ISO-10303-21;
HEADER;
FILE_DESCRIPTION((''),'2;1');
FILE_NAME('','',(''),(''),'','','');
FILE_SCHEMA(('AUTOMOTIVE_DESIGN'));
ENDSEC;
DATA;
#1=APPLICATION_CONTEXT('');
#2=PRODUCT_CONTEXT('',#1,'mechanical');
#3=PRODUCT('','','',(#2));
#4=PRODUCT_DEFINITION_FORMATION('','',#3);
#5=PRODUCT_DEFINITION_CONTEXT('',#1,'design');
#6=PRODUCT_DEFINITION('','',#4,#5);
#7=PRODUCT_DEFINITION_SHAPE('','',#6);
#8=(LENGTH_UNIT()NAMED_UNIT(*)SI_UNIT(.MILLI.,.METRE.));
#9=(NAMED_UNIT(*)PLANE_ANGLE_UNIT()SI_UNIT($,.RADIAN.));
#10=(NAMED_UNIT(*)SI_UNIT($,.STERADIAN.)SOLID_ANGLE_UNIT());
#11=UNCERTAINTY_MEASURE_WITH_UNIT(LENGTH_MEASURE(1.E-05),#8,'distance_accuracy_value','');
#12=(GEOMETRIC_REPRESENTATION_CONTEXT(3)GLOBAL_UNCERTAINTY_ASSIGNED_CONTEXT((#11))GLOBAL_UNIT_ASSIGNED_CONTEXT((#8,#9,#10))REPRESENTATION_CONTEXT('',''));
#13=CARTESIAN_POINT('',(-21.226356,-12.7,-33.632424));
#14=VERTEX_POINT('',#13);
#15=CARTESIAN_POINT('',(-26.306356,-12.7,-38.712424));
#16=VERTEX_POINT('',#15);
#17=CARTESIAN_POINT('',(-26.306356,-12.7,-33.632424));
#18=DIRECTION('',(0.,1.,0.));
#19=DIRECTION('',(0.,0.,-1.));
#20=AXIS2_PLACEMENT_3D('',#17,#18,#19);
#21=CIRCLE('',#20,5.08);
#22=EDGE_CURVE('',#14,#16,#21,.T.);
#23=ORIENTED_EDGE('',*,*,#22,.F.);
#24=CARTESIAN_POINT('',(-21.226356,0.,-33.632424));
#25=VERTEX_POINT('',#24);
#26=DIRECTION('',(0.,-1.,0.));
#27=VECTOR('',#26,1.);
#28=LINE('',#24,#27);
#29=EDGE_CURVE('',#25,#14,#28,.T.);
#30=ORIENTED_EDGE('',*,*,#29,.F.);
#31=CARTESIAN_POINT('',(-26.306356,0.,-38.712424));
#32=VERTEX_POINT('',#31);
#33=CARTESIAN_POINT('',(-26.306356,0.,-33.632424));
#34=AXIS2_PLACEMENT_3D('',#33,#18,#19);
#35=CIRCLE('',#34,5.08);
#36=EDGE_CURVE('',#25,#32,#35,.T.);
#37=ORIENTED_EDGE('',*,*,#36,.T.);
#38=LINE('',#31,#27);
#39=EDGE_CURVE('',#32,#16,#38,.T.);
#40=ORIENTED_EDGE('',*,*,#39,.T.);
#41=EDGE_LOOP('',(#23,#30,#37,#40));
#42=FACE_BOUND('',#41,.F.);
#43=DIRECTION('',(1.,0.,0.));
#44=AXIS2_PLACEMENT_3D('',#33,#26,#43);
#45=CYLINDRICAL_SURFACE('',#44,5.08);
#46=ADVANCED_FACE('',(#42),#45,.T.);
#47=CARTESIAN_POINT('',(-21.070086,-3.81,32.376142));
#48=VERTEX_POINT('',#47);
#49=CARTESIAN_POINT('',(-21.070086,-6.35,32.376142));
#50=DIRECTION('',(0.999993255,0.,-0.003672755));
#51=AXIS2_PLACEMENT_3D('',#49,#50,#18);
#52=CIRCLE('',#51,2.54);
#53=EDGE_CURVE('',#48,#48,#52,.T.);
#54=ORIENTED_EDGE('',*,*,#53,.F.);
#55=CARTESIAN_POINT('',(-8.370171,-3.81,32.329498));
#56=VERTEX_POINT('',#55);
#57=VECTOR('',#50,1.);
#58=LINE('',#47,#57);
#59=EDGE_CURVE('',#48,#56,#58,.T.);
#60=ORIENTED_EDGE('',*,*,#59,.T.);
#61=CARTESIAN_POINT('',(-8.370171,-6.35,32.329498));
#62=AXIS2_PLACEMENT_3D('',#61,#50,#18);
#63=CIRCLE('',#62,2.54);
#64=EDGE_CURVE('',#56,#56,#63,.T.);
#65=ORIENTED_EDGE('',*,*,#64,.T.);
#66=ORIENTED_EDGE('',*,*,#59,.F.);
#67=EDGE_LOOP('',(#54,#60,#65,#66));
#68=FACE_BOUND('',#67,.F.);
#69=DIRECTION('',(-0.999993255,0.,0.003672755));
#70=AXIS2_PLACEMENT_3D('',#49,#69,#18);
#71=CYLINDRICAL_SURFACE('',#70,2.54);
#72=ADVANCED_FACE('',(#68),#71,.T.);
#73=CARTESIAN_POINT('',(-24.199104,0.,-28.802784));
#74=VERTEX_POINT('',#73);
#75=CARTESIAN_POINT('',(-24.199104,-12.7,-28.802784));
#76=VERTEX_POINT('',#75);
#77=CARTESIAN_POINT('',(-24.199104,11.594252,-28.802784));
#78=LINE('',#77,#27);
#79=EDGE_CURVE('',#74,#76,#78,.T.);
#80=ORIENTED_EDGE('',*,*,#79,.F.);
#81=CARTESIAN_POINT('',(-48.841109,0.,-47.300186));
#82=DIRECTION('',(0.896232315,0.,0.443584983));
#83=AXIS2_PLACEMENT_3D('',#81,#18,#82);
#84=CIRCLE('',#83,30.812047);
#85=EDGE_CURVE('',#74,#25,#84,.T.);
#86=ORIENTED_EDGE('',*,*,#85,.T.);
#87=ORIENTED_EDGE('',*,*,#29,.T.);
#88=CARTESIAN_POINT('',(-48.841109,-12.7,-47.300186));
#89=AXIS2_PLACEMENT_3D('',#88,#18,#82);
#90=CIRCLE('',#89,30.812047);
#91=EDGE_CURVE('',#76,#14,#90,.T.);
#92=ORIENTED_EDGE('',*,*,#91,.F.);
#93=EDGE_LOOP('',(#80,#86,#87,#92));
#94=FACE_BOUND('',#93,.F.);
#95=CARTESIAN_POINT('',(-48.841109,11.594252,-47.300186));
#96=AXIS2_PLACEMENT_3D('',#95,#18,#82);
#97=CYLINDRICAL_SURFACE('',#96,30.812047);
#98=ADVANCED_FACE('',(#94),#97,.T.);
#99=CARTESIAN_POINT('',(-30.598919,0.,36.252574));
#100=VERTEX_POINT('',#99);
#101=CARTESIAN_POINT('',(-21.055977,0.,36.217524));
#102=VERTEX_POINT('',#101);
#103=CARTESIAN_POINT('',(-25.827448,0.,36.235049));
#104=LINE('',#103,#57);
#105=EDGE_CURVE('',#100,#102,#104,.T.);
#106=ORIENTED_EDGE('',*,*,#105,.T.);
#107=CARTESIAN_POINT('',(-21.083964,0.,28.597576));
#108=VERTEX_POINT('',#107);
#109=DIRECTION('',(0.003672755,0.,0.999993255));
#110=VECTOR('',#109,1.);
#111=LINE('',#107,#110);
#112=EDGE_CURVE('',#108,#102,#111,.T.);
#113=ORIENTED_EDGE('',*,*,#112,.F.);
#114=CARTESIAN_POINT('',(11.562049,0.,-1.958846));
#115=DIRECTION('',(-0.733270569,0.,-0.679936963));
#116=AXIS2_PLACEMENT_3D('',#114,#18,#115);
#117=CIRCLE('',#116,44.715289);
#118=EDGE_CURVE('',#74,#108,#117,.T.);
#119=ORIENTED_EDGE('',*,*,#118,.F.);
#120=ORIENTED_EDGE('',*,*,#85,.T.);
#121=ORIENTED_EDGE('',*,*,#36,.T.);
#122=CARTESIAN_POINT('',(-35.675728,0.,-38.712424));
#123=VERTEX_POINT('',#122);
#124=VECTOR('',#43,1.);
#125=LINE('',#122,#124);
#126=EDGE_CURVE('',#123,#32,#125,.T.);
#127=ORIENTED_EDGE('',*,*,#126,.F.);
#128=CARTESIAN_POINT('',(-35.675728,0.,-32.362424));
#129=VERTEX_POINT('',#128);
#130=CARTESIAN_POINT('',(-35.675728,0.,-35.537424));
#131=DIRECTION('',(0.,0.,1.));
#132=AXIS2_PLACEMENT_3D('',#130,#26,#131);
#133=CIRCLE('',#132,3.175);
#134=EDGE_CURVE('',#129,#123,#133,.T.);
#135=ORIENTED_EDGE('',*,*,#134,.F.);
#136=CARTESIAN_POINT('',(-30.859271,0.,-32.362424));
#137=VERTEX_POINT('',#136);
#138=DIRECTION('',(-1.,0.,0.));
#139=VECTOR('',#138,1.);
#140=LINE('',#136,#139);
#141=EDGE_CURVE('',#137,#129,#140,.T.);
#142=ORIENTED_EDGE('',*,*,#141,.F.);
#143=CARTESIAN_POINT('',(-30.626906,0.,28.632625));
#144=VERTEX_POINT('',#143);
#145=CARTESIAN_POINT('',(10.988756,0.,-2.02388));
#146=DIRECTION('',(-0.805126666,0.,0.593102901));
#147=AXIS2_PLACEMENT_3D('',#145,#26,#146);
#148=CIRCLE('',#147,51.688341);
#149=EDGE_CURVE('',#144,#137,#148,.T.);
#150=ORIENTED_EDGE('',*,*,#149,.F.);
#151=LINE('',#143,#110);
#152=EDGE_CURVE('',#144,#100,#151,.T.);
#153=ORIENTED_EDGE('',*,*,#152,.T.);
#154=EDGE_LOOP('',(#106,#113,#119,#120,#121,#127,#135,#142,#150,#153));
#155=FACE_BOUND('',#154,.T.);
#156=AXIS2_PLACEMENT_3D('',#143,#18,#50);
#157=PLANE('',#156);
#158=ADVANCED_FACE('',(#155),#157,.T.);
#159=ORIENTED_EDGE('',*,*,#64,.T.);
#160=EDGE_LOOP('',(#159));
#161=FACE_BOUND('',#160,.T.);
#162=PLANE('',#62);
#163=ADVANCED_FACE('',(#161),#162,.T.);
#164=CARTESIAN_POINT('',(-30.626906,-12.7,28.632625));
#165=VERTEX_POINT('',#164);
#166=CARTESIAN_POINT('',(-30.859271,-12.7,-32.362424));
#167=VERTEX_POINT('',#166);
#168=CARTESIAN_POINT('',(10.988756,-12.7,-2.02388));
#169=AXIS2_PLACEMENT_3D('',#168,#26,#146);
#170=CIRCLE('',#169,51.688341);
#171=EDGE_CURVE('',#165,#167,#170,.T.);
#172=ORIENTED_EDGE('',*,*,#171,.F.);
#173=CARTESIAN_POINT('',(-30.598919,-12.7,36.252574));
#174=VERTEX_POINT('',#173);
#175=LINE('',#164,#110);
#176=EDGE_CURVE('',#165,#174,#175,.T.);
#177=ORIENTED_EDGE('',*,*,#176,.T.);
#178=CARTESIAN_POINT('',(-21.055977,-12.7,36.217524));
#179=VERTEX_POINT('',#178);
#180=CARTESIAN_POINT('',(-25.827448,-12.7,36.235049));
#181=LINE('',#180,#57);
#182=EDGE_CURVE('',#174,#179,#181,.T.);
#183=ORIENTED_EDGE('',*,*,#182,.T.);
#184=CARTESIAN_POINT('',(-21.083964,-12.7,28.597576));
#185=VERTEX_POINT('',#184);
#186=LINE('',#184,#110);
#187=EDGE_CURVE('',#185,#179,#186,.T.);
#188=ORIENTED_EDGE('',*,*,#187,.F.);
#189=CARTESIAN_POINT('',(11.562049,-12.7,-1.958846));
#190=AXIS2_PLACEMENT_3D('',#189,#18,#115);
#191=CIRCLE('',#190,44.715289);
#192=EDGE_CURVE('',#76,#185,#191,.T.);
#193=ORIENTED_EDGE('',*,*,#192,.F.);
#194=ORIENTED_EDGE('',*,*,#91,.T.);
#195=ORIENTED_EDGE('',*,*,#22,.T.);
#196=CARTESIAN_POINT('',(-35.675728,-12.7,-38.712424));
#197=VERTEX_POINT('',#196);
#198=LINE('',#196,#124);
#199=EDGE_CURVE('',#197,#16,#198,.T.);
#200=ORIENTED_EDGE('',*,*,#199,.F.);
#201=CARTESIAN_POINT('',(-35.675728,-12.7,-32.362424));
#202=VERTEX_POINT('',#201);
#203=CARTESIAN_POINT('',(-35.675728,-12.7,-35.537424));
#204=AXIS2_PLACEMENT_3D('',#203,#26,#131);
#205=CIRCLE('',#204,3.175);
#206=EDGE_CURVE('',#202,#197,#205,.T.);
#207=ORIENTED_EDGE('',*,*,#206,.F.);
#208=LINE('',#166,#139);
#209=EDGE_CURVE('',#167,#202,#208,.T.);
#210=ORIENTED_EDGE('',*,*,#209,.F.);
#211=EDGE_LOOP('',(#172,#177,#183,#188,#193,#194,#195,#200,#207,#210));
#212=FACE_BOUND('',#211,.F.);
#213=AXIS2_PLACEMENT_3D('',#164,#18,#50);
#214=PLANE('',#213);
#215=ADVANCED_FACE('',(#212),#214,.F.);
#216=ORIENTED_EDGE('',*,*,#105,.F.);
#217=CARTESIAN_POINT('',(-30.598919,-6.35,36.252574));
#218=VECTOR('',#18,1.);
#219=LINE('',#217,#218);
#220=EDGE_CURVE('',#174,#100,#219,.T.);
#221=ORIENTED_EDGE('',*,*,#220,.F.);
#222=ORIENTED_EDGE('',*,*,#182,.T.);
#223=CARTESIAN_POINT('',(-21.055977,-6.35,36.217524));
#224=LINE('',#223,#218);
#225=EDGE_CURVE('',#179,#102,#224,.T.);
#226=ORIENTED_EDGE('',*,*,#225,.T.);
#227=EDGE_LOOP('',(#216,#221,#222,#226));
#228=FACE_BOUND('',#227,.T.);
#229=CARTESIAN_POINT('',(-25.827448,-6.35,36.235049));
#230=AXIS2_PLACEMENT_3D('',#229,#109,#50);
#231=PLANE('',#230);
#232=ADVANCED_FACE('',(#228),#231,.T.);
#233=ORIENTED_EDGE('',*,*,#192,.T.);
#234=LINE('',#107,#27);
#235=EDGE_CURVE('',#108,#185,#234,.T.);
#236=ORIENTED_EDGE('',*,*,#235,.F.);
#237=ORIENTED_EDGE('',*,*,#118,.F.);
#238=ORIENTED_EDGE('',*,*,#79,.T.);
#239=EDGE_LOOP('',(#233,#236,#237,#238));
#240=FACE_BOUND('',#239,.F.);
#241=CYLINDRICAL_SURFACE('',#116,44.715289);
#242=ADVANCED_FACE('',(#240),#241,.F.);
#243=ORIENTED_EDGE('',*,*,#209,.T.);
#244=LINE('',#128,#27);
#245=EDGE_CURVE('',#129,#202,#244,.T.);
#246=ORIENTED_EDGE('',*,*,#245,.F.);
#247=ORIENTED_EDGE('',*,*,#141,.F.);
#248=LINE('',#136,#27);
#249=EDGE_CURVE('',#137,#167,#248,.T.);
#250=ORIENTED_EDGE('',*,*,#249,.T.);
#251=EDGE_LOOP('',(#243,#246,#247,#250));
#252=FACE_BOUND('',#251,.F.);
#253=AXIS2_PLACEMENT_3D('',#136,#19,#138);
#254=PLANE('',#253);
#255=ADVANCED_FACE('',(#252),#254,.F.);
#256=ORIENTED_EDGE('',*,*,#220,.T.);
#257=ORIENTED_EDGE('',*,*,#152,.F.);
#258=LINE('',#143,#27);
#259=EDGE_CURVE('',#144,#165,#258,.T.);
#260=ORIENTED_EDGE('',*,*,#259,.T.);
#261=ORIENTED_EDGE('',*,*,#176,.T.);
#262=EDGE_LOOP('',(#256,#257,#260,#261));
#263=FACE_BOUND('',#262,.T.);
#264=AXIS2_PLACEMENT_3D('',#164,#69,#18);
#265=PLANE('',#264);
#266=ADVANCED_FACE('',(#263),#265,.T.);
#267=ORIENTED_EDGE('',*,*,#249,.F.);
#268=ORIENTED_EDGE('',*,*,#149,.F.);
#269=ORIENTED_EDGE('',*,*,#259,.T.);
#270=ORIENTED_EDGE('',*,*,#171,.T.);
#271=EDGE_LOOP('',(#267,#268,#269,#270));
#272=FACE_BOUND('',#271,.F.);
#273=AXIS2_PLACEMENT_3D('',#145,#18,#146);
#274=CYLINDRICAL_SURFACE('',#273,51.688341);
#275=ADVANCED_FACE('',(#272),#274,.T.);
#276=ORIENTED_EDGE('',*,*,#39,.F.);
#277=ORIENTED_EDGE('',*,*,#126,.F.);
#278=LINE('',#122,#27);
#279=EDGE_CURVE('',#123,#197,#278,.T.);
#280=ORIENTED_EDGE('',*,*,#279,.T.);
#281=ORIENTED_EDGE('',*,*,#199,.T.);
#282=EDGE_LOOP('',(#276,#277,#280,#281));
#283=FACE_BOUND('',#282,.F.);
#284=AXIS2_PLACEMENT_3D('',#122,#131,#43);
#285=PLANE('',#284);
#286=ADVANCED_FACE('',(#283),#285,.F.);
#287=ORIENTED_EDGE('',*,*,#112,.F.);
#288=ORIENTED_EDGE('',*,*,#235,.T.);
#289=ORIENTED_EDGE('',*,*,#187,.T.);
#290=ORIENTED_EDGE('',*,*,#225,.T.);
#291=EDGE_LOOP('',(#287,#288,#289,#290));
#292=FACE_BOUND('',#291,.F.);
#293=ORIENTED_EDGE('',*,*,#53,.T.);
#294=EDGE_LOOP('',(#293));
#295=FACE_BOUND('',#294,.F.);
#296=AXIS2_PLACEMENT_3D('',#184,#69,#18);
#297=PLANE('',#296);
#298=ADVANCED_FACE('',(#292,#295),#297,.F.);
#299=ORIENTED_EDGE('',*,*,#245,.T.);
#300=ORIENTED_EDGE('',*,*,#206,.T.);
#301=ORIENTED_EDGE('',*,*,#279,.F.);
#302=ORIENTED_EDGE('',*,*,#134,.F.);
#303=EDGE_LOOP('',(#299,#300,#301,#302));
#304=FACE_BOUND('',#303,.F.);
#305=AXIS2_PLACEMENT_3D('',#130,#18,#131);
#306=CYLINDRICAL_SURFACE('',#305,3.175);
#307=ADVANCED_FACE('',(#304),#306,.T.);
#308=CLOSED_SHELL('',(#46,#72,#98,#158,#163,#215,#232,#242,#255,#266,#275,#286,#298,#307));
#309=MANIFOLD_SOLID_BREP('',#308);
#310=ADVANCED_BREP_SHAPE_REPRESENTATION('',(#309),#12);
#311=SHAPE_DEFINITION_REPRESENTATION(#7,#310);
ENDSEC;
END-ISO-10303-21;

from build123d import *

# Parameters (mm, degrees)
F1_DEPTH    = 12.7
F2_W        = 9.5430067153
F2_H        = 12.7
F3_DEPTH    = 7.62
F4_R        = 2.54
F5_DEPTH    = 12.7
F6_R        = 5.08
F7_T1_DEPTH = 35.8885048544


# Not quite as in the source:
# - a fillet or chamfer that OpenCascade refuses, or shapes differently, is made with other operations: its cross-section is extruded or revolved along the edge and cut away or added


with BuildPart() as f1:
    # F0 (on Front) → F1 (new body)
    with BuildSketch(Plane.XZ):
        with BuildLine():
            Line((-21.0839635167, 28.5975757856), (-30.6269058684, 28.632624914))
            ThreePointArc((-30.6269058684, 28.632624914), (-40.6992100974, -1.826971115), (-30.8592707303, -32.3624242144))
            Line((-30.8592707303, -32.3624242144), (-21.2263563985, -32.3624242144))
            ThreePointArc((-21.2263563985, -32.3624242144), (-33.1531180249, -1.8543988892), (-21.0839635167, 28.5975757856))
        make_face()
        Polygon((-21.2263563985, -32.3624242144), (-30.8592707303, -32.3624242144), (-35.6757278961, -32.3624242144), (-35.6757278961, -38.7124242144), (-21.2263563985, -38.7124242144), align=None)
        with BuildLine():
            Line((-35.6757278961, -38.7124242144), (-35.6757278961, -32.3624242144))
            ThreePointArc((-35.6757278961, -32.3624242144), (-38.8507278961, -35.5374242144), (-35.6757278961, -38.7124242144))
        make_face()
    extrude(amount=F1_DEPTH)

    # F2 (on face) → F3 (join)
    with BuildSketch(Plane(origin=(0.1047467849, 0, 28.519754313), x_dir=(0.9999932554, 0, -0.0036727553), z_dir=(0.0036727553, 0, 0.9999932554))):
        with Locations((-25.9603565693, -6.35)):
            Rectangle(F2_W, F2_H)
    extrude(amount=F3_DEPTH)

    # F4 (on face) → F5 (join)
    with BuildSketch(Plane(origin=(-21.1887103016, 0, 0.0778214726), x_dir=(0, 1, 0), z_dir=(0.9999932554, 0, -0.0036727553))):
        with Locations((-6.35, 32.2985388339)):
            Circle(F4_R)
    extrude(amount=F5_DEPTH)

    # F6
    f6_edges = [f1.edges().sort_by_distance(p)[0] for p in [
        (-21.226356, -6.35, -38.712424),
    ]]
    fillet(f6_edges, radius=F6_R)

    # F7: fillet of radius 30.8120471725 on 1 edges, made by hand

    # F7_s2 → F7_t1 (cut)
    with BuildSketch(Plane.XZ.offset(-11.5942524272)):
        with BuildLine():
            ThreePointArc((-21.2263563985, -33.6324242144), (-22.6013772134, -31.1490637357), (-24.1991044236, -28.8027838569))
            ThreePointArc((-24.1991044236, -28.8027838569), (-22.7589105371, -30.6211702571), (-21.2263563985, -32.3624242144))
            Line((-21.2263563985, -32.3624242144), (-21.2263563985, -33.6324242144))
        make_face()
    extrude(amount=F7_T1_DEPTH, mode=Mode.SUBTRACT)


solid = f1.part
